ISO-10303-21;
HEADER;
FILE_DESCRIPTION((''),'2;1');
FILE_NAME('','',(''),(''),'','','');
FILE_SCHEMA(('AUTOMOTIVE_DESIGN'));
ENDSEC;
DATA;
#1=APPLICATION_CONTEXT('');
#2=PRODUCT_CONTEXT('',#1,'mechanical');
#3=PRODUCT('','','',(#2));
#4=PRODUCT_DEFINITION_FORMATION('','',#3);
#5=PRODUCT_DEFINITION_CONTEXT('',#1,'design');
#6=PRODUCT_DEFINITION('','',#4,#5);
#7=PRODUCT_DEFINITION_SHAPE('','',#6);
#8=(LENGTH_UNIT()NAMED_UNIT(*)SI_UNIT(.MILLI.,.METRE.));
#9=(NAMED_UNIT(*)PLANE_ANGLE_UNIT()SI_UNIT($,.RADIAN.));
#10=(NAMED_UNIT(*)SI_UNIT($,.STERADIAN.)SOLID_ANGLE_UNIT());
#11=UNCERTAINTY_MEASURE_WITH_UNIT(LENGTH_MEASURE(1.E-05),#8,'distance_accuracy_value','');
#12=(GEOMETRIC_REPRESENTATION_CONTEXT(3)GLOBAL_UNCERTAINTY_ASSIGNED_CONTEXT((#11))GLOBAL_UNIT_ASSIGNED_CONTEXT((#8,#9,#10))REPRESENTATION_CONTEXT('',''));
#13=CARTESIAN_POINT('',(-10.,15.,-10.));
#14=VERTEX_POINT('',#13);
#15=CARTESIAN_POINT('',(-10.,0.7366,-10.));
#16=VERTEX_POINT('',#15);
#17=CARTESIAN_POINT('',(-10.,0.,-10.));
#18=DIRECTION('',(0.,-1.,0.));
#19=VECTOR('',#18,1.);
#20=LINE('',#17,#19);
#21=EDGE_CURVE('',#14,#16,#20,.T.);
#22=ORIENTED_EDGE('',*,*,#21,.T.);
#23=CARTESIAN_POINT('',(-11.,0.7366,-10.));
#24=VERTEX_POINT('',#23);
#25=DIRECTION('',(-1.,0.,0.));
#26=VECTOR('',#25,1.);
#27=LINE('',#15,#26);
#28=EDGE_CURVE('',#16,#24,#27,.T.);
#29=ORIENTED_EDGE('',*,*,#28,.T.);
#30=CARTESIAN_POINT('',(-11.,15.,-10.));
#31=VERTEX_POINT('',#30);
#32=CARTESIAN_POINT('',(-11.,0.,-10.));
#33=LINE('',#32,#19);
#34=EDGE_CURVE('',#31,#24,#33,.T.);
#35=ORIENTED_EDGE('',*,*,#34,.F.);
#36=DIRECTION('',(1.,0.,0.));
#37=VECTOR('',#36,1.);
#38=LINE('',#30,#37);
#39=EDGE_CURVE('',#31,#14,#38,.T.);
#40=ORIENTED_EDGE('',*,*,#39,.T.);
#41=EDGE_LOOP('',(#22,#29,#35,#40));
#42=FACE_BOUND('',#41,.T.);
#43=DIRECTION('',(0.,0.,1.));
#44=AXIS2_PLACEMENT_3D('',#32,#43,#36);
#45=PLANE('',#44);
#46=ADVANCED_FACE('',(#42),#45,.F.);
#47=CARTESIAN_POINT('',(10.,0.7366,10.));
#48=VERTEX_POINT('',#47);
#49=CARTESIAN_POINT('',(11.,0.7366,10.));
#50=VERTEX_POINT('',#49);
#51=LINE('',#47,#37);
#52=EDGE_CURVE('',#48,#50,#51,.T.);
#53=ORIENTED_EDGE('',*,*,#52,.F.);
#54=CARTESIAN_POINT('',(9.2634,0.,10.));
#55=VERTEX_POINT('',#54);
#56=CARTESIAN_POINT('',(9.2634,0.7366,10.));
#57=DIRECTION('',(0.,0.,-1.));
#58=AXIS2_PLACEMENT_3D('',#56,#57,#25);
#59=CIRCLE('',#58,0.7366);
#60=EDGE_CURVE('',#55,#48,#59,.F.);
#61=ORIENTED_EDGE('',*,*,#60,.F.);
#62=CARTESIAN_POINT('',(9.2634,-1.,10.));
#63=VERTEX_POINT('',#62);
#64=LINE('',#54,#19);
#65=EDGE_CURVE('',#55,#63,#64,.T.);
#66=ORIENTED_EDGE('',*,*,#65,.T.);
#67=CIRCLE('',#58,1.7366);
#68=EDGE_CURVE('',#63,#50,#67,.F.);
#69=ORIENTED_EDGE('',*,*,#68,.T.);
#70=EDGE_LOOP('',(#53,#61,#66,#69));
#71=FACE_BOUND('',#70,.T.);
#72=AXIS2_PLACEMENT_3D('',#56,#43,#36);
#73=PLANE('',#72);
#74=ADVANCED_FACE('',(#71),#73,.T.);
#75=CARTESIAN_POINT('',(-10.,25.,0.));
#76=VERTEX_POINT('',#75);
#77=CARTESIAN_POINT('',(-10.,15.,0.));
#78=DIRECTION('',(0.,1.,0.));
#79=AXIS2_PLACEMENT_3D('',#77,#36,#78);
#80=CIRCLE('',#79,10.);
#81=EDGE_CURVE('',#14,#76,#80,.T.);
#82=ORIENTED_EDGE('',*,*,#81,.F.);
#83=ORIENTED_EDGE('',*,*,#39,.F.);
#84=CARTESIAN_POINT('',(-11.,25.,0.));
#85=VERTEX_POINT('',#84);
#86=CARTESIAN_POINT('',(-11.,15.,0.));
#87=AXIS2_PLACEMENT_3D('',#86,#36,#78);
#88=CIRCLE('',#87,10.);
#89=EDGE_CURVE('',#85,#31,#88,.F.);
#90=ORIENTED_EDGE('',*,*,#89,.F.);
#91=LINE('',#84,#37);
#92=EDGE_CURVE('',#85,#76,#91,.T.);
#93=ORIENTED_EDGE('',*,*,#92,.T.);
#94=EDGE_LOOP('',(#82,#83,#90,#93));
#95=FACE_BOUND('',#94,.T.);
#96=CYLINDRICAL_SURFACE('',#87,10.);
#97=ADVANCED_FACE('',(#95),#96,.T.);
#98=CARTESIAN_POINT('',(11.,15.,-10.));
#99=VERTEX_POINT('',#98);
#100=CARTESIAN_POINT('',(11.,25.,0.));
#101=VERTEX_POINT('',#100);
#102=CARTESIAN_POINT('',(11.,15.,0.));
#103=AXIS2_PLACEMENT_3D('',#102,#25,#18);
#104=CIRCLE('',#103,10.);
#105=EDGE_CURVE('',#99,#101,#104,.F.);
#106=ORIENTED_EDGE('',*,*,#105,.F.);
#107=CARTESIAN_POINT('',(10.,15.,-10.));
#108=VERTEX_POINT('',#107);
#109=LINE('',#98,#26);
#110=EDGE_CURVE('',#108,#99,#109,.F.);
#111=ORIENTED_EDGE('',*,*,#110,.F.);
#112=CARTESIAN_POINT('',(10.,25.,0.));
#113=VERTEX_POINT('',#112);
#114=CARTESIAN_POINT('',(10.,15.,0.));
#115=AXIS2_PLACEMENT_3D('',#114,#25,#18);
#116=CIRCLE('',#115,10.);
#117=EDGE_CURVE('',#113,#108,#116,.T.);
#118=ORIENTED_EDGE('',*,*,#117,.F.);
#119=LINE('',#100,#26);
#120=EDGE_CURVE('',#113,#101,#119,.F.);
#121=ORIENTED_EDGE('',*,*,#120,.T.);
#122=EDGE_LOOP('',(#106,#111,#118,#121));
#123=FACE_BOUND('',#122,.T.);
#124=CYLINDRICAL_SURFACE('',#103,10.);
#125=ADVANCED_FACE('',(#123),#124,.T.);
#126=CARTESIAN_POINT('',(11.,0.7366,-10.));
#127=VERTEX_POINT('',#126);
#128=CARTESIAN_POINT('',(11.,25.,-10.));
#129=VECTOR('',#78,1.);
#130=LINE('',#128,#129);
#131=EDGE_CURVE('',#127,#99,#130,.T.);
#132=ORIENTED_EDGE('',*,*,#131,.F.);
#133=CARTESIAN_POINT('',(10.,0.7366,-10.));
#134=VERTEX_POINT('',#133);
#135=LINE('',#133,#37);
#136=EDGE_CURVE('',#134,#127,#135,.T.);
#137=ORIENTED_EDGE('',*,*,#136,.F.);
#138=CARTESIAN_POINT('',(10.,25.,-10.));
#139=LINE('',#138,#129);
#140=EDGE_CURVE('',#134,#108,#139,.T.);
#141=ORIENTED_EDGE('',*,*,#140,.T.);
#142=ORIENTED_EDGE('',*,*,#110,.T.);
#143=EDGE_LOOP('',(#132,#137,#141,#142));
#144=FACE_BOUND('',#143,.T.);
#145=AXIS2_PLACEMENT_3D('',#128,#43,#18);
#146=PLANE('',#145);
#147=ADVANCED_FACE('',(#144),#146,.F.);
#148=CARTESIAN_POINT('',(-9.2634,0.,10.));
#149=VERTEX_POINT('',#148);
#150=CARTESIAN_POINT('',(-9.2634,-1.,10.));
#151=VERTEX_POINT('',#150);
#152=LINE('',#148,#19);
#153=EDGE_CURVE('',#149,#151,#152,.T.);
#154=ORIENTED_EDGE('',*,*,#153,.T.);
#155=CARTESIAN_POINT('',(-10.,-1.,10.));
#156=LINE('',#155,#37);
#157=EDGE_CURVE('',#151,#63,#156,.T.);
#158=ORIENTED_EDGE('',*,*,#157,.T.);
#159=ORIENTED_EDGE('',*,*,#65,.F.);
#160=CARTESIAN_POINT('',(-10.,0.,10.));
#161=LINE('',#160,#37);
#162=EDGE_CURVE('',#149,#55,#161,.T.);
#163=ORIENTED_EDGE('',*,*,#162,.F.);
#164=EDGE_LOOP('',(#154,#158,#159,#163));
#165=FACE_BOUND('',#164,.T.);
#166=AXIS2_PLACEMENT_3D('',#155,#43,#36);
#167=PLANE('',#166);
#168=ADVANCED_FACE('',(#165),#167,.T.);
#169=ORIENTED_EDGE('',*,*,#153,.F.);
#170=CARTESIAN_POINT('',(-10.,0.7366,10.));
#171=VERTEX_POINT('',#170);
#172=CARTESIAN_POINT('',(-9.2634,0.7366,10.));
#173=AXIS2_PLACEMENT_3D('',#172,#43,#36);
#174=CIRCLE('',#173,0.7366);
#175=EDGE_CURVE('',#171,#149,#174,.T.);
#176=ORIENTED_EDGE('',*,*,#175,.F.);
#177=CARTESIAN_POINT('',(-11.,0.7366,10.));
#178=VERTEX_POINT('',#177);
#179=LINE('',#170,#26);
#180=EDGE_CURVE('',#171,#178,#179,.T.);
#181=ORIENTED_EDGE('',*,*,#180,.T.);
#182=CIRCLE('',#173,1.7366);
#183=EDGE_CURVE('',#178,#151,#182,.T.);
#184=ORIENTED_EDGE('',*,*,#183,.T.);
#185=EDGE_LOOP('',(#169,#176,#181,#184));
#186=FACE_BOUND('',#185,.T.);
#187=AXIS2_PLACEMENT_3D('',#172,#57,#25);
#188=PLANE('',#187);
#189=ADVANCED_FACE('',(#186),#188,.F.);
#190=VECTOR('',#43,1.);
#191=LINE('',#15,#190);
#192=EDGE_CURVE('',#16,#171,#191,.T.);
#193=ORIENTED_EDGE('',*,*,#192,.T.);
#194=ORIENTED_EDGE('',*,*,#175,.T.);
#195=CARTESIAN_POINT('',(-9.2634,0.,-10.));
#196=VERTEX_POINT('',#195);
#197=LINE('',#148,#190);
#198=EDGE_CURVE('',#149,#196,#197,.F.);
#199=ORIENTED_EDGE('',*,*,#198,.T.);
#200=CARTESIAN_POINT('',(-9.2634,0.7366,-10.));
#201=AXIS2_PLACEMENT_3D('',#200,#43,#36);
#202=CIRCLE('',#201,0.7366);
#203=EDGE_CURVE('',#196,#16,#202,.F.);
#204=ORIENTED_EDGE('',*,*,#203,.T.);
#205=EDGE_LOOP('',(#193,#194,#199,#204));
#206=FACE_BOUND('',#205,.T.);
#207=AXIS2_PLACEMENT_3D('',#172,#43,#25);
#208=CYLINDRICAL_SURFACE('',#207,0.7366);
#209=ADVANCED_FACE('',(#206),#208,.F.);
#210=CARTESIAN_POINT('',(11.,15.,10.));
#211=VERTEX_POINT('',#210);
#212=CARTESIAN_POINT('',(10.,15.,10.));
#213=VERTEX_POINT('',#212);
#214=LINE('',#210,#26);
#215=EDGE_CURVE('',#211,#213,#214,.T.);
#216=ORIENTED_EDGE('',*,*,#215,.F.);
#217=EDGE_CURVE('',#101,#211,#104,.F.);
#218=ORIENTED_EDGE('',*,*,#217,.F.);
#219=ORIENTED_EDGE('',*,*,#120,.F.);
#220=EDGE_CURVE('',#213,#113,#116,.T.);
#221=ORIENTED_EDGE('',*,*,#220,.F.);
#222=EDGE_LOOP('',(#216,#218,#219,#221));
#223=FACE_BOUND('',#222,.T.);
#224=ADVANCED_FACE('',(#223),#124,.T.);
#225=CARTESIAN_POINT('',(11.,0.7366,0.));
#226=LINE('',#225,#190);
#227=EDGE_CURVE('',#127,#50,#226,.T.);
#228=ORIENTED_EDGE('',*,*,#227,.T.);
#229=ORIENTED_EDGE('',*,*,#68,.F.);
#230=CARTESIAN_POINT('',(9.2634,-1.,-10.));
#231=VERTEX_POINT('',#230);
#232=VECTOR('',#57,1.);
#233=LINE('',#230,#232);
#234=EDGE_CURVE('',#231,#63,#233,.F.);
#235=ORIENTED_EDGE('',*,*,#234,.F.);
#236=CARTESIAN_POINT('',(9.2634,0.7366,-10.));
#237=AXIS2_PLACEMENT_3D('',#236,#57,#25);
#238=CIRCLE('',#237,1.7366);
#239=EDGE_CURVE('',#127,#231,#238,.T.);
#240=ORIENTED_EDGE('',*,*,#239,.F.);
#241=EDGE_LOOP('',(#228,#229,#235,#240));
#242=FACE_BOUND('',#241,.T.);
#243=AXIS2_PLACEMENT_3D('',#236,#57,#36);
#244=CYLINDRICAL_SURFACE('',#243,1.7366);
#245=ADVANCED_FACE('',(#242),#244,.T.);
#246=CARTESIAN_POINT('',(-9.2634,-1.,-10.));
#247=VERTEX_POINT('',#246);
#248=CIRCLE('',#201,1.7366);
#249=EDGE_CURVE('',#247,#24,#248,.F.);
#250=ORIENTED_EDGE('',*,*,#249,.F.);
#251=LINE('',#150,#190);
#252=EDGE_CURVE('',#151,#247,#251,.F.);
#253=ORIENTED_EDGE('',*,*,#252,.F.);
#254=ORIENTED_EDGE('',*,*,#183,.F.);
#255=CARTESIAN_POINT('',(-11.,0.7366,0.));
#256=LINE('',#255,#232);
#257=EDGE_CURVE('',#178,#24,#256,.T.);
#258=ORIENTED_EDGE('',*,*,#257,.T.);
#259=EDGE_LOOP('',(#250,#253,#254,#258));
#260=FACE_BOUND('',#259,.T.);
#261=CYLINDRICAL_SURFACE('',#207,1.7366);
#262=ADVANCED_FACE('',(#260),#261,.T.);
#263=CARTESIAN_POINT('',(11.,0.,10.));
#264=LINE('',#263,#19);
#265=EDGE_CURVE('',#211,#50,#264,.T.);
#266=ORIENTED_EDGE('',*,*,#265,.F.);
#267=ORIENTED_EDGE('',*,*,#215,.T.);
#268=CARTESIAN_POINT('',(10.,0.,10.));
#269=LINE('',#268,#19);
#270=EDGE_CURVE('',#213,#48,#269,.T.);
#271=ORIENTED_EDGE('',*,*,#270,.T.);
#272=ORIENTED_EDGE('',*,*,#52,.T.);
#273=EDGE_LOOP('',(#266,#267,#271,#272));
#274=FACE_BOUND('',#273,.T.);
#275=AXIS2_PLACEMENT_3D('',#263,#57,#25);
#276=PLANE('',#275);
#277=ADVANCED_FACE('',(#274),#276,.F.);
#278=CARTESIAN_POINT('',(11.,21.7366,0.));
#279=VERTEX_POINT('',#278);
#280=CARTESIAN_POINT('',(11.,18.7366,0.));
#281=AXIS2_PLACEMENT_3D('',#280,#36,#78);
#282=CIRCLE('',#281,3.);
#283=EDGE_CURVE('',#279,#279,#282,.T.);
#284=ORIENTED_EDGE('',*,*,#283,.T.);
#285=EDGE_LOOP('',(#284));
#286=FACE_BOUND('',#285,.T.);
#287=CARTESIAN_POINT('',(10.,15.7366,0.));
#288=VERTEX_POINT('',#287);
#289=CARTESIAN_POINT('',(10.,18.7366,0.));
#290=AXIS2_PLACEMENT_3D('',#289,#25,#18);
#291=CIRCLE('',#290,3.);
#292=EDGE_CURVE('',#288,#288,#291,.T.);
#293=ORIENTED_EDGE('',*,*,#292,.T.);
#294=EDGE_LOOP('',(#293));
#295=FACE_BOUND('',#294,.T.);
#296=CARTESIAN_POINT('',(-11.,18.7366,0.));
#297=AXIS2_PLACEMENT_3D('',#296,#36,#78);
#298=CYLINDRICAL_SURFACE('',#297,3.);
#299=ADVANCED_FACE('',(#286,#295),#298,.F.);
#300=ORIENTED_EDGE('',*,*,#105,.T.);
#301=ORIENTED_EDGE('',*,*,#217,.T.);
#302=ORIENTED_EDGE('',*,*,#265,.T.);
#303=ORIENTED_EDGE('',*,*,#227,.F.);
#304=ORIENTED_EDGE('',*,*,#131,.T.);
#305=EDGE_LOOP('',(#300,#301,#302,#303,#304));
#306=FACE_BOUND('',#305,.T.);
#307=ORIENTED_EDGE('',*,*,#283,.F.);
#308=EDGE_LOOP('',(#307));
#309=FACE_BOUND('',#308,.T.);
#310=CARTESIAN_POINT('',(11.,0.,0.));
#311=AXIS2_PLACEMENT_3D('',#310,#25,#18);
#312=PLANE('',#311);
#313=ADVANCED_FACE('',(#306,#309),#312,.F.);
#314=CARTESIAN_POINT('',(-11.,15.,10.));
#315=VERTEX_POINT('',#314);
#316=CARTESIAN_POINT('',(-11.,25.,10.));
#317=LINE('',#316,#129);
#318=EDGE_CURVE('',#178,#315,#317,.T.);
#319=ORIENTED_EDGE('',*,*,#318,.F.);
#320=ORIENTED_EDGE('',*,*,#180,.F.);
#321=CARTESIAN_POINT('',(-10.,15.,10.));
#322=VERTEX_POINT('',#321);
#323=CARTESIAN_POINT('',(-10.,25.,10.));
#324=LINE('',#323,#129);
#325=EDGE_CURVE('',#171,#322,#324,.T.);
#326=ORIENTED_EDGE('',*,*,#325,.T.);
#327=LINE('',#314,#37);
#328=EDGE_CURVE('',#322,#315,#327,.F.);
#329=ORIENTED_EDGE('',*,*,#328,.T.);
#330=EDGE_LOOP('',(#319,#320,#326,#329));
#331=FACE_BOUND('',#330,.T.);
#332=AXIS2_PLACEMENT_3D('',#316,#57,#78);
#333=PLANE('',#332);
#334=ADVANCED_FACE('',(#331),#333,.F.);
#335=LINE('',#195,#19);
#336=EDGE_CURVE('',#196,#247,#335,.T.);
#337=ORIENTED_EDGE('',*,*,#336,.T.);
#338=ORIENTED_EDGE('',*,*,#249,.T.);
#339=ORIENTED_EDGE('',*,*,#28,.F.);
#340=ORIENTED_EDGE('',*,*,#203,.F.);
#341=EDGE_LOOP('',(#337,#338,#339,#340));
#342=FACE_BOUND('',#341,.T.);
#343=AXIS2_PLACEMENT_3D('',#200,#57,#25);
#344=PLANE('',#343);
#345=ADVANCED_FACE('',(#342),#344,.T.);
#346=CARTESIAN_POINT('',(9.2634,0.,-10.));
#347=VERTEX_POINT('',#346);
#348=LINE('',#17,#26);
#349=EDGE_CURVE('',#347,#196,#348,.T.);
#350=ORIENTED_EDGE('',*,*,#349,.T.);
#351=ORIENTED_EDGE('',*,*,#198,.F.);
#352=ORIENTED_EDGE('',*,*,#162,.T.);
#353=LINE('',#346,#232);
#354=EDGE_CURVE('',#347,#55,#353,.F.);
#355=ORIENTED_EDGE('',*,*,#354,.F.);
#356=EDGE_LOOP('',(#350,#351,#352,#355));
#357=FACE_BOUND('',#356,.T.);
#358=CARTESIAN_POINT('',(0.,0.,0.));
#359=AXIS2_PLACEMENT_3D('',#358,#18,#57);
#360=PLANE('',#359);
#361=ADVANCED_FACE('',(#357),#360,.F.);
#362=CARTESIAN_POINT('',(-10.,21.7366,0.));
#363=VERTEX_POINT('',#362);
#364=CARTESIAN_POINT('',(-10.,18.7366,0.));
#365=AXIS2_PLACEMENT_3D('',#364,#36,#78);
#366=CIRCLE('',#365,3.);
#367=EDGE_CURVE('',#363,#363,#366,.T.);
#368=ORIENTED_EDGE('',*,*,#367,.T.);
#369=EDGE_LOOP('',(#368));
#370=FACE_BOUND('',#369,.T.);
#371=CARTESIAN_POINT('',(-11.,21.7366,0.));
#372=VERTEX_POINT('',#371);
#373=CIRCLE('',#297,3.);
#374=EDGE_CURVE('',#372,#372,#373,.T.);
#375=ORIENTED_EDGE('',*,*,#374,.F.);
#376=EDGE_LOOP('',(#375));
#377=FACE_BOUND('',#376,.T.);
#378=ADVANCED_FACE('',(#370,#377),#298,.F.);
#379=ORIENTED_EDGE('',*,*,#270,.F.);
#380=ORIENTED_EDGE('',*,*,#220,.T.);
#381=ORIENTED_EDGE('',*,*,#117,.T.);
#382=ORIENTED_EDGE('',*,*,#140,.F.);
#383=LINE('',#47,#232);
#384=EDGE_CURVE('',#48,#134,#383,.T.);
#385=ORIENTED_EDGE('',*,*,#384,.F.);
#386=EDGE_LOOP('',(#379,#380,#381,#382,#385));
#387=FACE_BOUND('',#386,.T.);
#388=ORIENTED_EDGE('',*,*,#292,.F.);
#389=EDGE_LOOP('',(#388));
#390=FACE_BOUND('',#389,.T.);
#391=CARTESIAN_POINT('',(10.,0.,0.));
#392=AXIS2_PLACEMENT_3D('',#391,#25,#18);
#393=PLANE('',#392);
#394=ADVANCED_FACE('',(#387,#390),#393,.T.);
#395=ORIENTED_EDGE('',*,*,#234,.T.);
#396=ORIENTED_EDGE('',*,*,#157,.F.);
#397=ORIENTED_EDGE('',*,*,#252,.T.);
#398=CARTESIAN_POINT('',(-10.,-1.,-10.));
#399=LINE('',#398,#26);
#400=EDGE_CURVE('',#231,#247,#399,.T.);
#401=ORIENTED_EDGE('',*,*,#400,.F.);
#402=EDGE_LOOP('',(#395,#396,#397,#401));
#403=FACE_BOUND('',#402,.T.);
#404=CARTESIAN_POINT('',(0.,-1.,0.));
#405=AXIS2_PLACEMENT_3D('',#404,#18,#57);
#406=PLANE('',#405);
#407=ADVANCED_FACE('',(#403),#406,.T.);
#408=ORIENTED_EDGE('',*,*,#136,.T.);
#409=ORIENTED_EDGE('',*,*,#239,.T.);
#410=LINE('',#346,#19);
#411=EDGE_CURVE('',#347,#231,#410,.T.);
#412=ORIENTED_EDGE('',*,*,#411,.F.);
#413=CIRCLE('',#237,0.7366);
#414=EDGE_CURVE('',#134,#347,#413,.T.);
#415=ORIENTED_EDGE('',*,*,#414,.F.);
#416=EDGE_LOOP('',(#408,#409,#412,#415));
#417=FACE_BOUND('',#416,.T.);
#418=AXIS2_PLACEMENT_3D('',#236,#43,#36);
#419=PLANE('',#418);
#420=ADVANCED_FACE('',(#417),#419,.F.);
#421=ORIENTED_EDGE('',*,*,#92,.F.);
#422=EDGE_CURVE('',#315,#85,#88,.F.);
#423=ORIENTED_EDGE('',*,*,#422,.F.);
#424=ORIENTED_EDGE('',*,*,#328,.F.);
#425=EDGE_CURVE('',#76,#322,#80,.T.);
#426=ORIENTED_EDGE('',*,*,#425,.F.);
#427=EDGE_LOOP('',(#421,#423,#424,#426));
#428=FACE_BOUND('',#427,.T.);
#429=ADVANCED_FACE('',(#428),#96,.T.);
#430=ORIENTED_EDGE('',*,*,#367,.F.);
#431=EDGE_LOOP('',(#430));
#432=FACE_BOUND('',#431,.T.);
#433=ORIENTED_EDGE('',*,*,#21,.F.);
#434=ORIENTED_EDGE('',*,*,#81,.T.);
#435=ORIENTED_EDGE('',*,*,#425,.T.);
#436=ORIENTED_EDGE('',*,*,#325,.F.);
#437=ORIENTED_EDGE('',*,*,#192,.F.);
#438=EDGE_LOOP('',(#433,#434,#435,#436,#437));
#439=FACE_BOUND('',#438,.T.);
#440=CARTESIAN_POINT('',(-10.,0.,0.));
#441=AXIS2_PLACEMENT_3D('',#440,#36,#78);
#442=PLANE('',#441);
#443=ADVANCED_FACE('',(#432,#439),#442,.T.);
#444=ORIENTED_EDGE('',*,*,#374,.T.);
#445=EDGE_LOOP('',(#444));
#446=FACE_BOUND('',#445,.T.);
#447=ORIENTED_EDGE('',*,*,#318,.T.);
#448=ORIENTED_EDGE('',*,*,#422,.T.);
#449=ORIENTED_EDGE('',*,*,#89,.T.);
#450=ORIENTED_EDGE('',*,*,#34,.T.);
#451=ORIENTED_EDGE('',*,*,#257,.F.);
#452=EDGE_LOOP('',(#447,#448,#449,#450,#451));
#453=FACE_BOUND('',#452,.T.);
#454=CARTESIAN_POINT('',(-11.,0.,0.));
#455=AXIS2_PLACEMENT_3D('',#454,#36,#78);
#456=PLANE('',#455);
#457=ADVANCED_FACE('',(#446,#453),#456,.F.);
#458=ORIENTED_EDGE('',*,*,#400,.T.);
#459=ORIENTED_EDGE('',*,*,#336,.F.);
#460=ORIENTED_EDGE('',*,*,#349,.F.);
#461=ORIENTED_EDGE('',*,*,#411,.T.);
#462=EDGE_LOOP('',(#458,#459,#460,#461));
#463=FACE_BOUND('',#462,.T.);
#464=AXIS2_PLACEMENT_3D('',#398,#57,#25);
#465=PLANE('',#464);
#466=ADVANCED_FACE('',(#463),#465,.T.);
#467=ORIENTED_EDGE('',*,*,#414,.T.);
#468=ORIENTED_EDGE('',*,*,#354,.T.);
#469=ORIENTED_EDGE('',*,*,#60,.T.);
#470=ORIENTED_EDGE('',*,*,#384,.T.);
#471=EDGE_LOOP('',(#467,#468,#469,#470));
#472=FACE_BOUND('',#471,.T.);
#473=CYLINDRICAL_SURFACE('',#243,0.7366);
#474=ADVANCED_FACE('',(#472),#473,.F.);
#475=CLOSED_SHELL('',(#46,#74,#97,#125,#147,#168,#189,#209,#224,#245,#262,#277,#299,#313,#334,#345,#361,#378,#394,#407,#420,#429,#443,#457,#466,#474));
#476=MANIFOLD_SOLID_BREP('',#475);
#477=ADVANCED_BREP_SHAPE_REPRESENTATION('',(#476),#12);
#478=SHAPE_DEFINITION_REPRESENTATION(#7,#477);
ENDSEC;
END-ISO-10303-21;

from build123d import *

# Parameters (mm, degrees)
CROQUIS1_W                         = 20
CROQUIS1_H                         = 20
BRIDA_BASE1_DEPTH                  = 1
BRIDA_DE_ARISTA1_STRIP_W           = 5.4732
BRIDA_DE_ARISTA1_STRIP_H           = 1
BRIDA_DE_ARISTA1_STRIP_CUT_DEPTH   = 20
BRIDA_DE_ARISTA1_STRIP_2_W         = 5.4732
BRIDA_DE_ARISTA1_STRIP_2_H         = 1
BRIDA_DE_ARISTA1_STRIP_CUT_2_DEPTH = 20
BRIDA_DE_ARISTA1_DEPTH             = 20
BRIDA_DE_ARISTA1_BEND_DEPTH        = 20
CROQUIS12_R                        = 3
CORTAR_EXTRUIR1_DEPTH              = 35.770677301
REDONDEO1_R                        = 10


# Sheet-metal steps are written as plain solids
with BuildPart() as part:
    # Croquis1 → Brida base1 (new body)
    with BuildSketch(Plane(origin=(0, 0, 0), x_dir=(1, 0, 0), z_dir=(0, 1, 0))):
        Rectangle(CROQUIS1_W, CROQUIS1_H)
    extrude(amount=-BRIDA_BASE1_DEPTH)

    # Brida de arista1 strip (across the edge) → Brida de arista1 strip cut (cut)
    with BuildSketch(Plane(origin=(10, 0, 10), x_dir=(-1, 0, 0), z_dir=(0, 0, -1))):
        with Locations((-2, -0.5)):
            Rectangle(BRIDA_DE_ARISTA1_STRIP_W, BRIDA_DE_ARISTA1_STRIP_H)
    extrude(amount=BRIDA_DE_ARISTA1_STRIP_CUT_DEPTH, mode=Mode.SUBTRACT)

    # Brida de arista1 strip 2 (across the edge) → Brida de arista1 strip cut 2 (cut)
    with BuildSketch(Plane(origin=(-10, 0, -10), x_dir=(1, 0, 0), z_dir=(0, 0, 1))):
        with Locations((-2, -0.5)):
            Rectangle(BRIDA_DE_ARISTA1_STRIP_2_W, BRIDA_DE_ARISTA1_STRIP_2_H)
    extrude(amount=BRIDA_DE_ARISTA1_STRIP_CUT_2_DEPTH, mode=Mode.SUBTRACT)

    # Brida de arista1 section (across the edge) → Brida de arista1 (add)
    with BuildSketch(Plane(origin=(10, 0, 10), x_dir=(-1, 0, 0), z_dir=(0, 0, -1))):
        with BuildLine():
            Line((-1, 0.7366), (-1, 25))
            Line((-1, 25), (0, 25))
            Line((0, 25), (0, 0.7366))
            ThreePointArc((0, 0.7366), (0.215745145, 0.215745145), (0.7366, 0))
            Line((0.7366, 0), (0.7366, -1))
            ThreePointArc((0.7366, -1), (-0.491361636, -0.491361636), (-1, 0.7366))
        make_face()
    extrude(amount=BRIDA_DE_ARISTA1_DEPTH)

    # Brida de arista1 section 2 (across the edge) → Brida de arista1 bend (add)
    with BuildSketch(Plane(origin=(-10, 0, -10), x_dir=(1, 0, 0), z_dir=(0, 0, 1))):
        with BuildLine():
            Line((-1, 0.7366), (-1, 25))
            Line((-1, 25), (0, 25))
            Line((0, 25), (0, 0.7366))
            ThreePointArc((0, 0.7366), (0.215745145, 0.215745145), (0.7366, 0))
            Line((0.7366, 0), (0.7366, -1))
            ThreePointArc((0.7366, -1), (-0.491361636, -0.491361636), (-1, 0.7366))
        make_face()
    extrude(amount=BRIDA_DE_ARISTA1_BEND_DEPTH)

    # Croquis12 → Cortar-Extruir1 (cut, through all)
    with BuildSketch(Plane(origin=(11, 0, 0), x_dir=(0, 0, -1), z_dir=(1, 0, 0))):
        with Locations(Location((0, 18.7366, 0), (0, 0, 90))):
            Circle(CROQUIS12_R)
    extrude(amount=-CORTAR_EXTRUIR1_DEPTH, mode=Mode.SUBTRACT)

    # Redondeo1
    redondeo1_edges = [part.edges().sort_by_distance(p)[0] for p in [
        (-10.5, 25, -10),
        (10.5, 25, -10),
        (10.5, 25, 10),
        (-10.5, 25, 10),
    ]]
    fillet(redondeo1_edges, radius=REDONDEO1_R - 0.0001)  # a hair under: the kernel refuses the full size


solid = part.part
